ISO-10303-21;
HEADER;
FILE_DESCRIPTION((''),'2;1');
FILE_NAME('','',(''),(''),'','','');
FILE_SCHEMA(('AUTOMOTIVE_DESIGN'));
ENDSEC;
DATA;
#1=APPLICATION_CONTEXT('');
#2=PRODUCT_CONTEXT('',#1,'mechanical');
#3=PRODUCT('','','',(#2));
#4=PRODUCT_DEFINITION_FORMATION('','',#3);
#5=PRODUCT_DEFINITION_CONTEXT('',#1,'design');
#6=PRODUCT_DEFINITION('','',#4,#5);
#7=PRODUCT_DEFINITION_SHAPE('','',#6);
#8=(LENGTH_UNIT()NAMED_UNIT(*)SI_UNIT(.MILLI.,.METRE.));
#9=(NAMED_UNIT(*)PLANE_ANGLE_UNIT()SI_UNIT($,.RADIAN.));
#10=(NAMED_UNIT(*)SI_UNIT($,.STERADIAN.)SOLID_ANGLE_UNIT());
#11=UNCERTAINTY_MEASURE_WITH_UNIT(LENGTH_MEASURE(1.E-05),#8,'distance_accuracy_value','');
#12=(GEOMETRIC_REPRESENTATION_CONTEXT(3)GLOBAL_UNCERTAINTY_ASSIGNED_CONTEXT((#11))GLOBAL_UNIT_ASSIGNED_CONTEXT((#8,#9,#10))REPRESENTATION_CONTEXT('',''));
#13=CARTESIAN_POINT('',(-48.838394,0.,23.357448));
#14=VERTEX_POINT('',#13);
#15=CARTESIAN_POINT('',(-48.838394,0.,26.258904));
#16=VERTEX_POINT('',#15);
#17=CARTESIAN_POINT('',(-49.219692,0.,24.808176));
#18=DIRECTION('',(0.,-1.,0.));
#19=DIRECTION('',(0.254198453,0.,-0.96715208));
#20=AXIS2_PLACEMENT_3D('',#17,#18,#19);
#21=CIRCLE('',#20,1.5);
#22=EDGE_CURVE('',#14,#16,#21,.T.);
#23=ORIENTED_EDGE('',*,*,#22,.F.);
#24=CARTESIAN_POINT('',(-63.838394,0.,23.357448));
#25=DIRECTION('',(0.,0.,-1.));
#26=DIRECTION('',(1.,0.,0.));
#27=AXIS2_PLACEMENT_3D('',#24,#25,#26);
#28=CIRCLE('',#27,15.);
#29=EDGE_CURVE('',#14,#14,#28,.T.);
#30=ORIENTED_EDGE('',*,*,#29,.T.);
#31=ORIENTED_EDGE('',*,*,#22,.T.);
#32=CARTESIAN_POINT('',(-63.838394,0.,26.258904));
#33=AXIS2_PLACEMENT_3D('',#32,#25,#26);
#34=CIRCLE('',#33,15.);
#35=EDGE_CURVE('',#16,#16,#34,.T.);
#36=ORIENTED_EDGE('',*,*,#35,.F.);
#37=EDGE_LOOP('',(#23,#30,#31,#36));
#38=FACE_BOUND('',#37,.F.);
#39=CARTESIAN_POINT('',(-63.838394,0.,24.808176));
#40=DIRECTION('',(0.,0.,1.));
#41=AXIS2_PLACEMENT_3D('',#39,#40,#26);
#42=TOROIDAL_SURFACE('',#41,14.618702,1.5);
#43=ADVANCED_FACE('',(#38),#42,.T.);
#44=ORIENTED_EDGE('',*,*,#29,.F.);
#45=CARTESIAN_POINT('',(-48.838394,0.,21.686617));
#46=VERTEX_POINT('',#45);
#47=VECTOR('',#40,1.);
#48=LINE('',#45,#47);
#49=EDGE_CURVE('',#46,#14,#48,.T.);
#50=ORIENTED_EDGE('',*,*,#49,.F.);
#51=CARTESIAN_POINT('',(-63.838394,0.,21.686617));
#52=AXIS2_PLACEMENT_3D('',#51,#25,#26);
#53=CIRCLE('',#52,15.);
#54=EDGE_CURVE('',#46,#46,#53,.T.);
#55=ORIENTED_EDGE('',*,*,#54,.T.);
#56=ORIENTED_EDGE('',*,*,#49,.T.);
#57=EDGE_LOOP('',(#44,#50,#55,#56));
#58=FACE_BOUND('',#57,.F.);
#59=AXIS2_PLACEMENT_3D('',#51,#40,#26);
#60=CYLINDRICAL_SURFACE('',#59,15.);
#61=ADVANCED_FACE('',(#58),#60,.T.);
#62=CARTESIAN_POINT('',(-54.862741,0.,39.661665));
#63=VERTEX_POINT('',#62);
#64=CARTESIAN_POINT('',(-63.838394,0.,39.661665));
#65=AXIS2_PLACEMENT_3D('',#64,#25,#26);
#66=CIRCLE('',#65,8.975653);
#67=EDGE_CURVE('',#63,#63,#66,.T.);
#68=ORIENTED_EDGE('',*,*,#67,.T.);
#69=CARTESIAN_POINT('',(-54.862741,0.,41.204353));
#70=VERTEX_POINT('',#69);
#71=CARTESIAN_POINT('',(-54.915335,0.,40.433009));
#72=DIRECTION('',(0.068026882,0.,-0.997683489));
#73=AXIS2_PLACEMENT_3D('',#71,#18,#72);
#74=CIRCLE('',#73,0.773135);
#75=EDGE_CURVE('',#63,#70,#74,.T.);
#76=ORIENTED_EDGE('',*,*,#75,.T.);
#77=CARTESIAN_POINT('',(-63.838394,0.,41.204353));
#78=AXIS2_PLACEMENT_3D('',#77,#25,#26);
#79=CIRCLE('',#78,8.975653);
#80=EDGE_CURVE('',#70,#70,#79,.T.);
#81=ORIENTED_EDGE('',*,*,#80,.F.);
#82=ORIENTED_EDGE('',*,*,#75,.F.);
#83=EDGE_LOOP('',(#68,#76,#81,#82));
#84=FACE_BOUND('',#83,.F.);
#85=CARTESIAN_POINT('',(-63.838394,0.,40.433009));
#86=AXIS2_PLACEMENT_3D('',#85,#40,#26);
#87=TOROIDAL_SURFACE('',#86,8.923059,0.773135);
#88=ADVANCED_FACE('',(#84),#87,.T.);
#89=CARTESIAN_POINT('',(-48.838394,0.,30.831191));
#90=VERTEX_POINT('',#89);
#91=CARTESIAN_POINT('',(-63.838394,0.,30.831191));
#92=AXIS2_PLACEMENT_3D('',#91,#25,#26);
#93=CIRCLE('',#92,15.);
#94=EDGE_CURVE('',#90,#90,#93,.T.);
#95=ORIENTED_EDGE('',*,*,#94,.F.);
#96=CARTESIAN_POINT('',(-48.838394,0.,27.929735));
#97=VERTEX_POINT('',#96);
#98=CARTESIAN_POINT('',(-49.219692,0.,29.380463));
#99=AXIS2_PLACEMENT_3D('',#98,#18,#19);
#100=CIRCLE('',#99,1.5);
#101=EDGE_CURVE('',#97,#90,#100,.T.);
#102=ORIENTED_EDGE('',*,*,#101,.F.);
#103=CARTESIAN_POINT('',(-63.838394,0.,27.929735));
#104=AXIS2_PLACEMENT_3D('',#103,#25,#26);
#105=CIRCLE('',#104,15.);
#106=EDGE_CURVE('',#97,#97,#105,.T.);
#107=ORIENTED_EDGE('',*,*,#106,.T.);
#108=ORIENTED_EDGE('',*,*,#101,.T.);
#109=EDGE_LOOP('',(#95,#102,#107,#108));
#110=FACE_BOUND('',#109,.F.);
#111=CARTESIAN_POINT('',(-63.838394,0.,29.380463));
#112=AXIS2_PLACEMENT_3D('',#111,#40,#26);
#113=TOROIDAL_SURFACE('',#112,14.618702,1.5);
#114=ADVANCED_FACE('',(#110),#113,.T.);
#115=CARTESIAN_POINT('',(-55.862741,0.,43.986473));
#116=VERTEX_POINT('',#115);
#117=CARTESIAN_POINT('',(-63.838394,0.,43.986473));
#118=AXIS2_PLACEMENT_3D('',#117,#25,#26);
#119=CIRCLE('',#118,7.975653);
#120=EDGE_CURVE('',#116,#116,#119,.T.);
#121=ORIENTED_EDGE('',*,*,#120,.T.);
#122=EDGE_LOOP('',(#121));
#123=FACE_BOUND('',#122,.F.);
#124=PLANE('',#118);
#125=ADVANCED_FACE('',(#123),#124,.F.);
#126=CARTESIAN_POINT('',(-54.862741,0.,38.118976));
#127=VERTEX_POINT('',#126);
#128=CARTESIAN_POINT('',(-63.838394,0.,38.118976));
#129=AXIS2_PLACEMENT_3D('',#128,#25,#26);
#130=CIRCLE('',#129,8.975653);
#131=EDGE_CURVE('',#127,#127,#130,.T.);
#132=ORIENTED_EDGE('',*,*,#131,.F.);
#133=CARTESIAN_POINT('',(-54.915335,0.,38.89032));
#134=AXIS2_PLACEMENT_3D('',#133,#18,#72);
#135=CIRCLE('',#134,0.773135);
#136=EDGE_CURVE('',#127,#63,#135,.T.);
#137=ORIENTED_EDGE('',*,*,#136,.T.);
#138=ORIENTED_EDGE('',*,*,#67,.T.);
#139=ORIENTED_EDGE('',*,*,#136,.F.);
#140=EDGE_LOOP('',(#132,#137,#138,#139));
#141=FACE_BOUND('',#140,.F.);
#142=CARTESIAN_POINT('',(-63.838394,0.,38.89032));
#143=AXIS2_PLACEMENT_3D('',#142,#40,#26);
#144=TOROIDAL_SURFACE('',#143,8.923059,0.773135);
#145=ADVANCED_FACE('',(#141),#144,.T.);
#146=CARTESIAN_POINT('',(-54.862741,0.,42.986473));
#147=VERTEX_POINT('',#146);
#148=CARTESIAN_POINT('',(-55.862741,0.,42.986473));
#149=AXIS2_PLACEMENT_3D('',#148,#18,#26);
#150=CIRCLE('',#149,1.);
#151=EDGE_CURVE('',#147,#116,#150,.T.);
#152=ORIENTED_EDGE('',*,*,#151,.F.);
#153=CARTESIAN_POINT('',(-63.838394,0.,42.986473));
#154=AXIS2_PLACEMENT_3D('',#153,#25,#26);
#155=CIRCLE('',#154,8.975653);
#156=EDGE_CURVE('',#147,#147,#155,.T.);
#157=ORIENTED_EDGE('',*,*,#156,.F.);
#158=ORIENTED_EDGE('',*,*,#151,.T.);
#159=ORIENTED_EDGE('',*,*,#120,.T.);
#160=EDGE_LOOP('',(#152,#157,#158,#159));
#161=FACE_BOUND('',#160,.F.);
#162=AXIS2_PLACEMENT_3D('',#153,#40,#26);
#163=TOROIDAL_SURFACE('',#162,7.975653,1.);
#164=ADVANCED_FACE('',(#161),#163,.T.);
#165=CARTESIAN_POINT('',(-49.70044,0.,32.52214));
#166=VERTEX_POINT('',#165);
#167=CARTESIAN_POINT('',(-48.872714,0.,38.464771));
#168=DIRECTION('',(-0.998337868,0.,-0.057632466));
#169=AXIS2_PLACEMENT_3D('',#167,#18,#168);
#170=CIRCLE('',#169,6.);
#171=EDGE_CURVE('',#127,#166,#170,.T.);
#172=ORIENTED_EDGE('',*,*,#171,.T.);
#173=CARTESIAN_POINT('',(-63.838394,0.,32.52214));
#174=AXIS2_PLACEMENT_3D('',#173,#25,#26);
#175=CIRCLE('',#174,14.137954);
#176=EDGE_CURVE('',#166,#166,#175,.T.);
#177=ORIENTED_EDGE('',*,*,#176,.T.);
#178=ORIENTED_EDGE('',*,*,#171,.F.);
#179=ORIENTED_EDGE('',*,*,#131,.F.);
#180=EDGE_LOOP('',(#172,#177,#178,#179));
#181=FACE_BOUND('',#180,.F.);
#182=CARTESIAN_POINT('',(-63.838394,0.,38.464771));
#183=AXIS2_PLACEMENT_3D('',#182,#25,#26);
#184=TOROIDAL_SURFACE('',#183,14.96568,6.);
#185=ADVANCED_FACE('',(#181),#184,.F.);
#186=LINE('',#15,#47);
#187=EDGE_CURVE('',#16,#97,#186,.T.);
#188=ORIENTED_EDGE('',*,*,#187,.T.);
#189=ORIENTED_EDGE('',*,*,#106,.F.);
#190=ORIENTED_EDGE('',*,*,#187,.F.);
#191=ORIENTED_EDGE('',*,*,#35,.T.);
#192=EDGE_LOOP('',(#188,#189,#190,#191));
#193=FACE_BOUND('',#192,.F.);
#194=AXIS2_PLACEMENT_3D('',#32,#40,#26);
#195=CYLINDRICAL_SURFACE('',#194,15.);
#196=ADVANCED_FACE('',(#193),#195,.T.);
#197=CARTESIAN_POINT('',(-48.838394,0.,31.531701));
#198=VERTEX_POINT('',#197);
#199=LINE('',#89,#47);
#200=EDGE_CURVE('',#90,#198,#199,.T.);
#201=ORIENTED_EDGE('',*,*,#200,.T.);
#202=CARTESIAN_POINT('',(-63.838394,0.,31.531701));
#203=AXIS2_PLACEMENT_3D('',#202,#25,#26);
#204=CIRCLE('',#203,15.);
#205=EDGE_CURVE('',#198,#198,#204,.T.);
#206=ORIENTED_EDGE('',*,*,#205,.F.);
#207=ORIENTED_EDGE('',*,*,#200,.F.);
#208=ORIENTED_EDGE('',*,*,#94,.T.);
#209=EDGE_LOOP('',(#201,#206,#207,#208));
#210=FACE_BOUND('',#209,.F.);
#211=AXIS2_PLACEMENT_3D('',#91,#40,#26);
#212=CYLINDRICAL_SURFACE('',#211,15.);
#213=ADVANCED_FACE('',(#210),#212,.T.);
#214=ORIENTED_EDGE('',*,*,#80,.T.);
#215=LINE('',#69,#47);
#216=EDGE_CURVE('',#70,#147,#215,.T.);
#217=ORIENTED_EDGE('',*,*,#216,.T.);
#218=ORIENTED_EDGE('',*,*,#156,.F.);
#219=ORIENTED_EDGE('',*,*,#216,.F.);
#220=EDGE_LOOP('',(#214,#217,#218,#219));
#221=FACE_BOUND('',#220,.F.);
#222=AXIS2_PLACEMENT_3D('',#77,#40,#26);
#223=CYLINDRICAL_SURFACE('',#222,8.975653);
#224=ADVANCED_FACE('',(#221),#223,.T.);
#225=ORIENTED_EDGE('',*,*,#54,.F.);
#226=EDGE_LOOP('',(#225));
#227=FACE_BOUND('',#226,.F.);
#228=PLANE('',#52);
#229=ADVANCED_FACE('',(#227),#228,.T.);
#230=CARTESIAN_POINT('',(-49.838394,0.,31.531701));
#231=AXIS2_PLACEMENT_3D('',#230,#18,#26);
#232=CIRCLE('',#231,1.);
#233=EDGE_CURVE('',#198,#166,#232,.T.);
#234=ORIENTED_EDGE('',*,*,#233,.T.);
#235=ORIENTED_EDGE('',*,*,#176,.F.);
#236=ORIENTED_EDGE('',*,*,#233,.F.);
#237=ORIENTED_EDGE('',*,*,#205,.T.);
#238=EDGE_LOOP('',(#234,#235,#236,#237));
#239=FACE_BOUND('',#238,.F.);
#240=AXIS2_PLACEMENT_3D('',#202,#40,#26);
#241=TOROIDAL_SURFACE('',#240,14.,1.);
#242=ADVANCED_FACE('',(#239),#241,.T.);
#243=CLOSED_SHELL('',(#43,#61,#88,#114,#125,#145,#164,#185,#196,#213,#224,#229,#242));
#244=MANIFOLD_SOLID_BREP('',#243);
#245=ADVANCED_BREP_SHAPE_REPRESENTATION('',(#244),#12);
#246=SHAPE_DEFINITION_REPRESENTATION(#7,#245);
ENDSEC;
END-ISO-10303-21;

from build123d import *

# Parameters (mm, degrees)
F2_R = 1
F4_R = 1


# Not quite as in the source:
# - a fillet or chamfer that OpenCascade refuses, or shapes differently, is made with other operations: its cross-section is extruded or revolved along the edge and cut away or added


with BuildPart() as f1:
    # F0 (on Front) → F1 (revolve)
    with BuildSketch(Plane.XZ):
        with BuildLine():
            Line((-54.8627413809, 43.9864732325), (-63.8383940968, 43.9864732325))
            Line((-63.8383940968, 43.9864732325), (-63.8383940968, 21.686617285))
            Line((-63.8383940968, 21.686617285), (-48.8383940968, 21.686617285))
            Line((-48.8383940968, 21.686617285), (-48.8383940968, 23.3574478392))
            ThreePointArc((-48.8383940968, 23.3574478392), (-47.7196917759, 24.8081759598), (-48.8383940968, 26.2589040804))
            Line((-48.8383940968, 26.2589040804), (-48.8383940968, 27.9297346346))
            ThreePointArc((-48.8383940968, 27.9297346346), (-47.7196917759, 29.3804627552), (-48.8383940968, 30.8311908759))
            Line((-48.8383940968, 30.8311908759), (-48.8383940968, 32.5317010283))
            Line((-48.8383940968, 32.5317010283), (-54.8627413809, 32.5317010283))
            Line((-54.8627413809, 32.5317010283), (-54.8627413809, 38.1189764225))
            ThreePointArc((-54.8627413809, 38.1189764225), (-54.1422003229, 38.8903204691), (-54.8627413809, 39.6616645157))
            ThreePointArc((-54.8627413809, 39.6616645157), (-54.1422003229, 40.4330085623), (-54.8627413809, 41.2043526089))
            Line((-54.8627413809, 41.2043526089), (-54.8627413809, 43.9864732325))
        make_face()
    revolve(axis=Axis((-63.8383940968, 0, 32.8365452588), (0, 0, -1)))

    # F2
    f2_edges = [f1.edges().sort_by_distance(p)[0] for p in [
        (-78.838394, 0, 32.531701),
    ]]
    fillet(f2_edges, radius=F2_R)

    # F3: fillet of radius 6 on 1 edges, made by hand

    # F3_s1 → F3_t2 (revolve)
    with BuildSketch(Plane.XZ):
        with BuildLine():
            ThreePointArc((-49.7004398219, 32.5221396272), (-53.2831091702, 34.39679679), (-54.8627413809, 38.1189764225))
            Line((-54.8627413809, 38.1189764225), (-55.4617441018, 38.0843969428))
            ThreePointArc((-55.4617441018, 38.0843969428), (-55.4627413809, 35.3253387254), (-55.4627413809, 32.5317010283))
            Line((-55.4627413809, 32.5317010283), (-54.8627413809, 31.9317010283))
            ThreePointArc((-54.8627413809, 31.9317010283), (-49.8383940968, 31.9317010283), (-49.7832123868, 31.9278764679))
            Line((-49.7832123868, 31.9278764679), (-49.7004398219, 32.5221396272))
        make_face()
    revolve(axis=Axis((-63.8383940968, 0, 32.5317010283), (0, 0, -1)))

    # F4
    f4_edges = [f1.edges().sort_by_distance(p)[0] for p in [
        (-72.814047, 0, 43.986473),
    ]]
    fillet(f4_edges, radius=F4_R)


solid = f1.part
